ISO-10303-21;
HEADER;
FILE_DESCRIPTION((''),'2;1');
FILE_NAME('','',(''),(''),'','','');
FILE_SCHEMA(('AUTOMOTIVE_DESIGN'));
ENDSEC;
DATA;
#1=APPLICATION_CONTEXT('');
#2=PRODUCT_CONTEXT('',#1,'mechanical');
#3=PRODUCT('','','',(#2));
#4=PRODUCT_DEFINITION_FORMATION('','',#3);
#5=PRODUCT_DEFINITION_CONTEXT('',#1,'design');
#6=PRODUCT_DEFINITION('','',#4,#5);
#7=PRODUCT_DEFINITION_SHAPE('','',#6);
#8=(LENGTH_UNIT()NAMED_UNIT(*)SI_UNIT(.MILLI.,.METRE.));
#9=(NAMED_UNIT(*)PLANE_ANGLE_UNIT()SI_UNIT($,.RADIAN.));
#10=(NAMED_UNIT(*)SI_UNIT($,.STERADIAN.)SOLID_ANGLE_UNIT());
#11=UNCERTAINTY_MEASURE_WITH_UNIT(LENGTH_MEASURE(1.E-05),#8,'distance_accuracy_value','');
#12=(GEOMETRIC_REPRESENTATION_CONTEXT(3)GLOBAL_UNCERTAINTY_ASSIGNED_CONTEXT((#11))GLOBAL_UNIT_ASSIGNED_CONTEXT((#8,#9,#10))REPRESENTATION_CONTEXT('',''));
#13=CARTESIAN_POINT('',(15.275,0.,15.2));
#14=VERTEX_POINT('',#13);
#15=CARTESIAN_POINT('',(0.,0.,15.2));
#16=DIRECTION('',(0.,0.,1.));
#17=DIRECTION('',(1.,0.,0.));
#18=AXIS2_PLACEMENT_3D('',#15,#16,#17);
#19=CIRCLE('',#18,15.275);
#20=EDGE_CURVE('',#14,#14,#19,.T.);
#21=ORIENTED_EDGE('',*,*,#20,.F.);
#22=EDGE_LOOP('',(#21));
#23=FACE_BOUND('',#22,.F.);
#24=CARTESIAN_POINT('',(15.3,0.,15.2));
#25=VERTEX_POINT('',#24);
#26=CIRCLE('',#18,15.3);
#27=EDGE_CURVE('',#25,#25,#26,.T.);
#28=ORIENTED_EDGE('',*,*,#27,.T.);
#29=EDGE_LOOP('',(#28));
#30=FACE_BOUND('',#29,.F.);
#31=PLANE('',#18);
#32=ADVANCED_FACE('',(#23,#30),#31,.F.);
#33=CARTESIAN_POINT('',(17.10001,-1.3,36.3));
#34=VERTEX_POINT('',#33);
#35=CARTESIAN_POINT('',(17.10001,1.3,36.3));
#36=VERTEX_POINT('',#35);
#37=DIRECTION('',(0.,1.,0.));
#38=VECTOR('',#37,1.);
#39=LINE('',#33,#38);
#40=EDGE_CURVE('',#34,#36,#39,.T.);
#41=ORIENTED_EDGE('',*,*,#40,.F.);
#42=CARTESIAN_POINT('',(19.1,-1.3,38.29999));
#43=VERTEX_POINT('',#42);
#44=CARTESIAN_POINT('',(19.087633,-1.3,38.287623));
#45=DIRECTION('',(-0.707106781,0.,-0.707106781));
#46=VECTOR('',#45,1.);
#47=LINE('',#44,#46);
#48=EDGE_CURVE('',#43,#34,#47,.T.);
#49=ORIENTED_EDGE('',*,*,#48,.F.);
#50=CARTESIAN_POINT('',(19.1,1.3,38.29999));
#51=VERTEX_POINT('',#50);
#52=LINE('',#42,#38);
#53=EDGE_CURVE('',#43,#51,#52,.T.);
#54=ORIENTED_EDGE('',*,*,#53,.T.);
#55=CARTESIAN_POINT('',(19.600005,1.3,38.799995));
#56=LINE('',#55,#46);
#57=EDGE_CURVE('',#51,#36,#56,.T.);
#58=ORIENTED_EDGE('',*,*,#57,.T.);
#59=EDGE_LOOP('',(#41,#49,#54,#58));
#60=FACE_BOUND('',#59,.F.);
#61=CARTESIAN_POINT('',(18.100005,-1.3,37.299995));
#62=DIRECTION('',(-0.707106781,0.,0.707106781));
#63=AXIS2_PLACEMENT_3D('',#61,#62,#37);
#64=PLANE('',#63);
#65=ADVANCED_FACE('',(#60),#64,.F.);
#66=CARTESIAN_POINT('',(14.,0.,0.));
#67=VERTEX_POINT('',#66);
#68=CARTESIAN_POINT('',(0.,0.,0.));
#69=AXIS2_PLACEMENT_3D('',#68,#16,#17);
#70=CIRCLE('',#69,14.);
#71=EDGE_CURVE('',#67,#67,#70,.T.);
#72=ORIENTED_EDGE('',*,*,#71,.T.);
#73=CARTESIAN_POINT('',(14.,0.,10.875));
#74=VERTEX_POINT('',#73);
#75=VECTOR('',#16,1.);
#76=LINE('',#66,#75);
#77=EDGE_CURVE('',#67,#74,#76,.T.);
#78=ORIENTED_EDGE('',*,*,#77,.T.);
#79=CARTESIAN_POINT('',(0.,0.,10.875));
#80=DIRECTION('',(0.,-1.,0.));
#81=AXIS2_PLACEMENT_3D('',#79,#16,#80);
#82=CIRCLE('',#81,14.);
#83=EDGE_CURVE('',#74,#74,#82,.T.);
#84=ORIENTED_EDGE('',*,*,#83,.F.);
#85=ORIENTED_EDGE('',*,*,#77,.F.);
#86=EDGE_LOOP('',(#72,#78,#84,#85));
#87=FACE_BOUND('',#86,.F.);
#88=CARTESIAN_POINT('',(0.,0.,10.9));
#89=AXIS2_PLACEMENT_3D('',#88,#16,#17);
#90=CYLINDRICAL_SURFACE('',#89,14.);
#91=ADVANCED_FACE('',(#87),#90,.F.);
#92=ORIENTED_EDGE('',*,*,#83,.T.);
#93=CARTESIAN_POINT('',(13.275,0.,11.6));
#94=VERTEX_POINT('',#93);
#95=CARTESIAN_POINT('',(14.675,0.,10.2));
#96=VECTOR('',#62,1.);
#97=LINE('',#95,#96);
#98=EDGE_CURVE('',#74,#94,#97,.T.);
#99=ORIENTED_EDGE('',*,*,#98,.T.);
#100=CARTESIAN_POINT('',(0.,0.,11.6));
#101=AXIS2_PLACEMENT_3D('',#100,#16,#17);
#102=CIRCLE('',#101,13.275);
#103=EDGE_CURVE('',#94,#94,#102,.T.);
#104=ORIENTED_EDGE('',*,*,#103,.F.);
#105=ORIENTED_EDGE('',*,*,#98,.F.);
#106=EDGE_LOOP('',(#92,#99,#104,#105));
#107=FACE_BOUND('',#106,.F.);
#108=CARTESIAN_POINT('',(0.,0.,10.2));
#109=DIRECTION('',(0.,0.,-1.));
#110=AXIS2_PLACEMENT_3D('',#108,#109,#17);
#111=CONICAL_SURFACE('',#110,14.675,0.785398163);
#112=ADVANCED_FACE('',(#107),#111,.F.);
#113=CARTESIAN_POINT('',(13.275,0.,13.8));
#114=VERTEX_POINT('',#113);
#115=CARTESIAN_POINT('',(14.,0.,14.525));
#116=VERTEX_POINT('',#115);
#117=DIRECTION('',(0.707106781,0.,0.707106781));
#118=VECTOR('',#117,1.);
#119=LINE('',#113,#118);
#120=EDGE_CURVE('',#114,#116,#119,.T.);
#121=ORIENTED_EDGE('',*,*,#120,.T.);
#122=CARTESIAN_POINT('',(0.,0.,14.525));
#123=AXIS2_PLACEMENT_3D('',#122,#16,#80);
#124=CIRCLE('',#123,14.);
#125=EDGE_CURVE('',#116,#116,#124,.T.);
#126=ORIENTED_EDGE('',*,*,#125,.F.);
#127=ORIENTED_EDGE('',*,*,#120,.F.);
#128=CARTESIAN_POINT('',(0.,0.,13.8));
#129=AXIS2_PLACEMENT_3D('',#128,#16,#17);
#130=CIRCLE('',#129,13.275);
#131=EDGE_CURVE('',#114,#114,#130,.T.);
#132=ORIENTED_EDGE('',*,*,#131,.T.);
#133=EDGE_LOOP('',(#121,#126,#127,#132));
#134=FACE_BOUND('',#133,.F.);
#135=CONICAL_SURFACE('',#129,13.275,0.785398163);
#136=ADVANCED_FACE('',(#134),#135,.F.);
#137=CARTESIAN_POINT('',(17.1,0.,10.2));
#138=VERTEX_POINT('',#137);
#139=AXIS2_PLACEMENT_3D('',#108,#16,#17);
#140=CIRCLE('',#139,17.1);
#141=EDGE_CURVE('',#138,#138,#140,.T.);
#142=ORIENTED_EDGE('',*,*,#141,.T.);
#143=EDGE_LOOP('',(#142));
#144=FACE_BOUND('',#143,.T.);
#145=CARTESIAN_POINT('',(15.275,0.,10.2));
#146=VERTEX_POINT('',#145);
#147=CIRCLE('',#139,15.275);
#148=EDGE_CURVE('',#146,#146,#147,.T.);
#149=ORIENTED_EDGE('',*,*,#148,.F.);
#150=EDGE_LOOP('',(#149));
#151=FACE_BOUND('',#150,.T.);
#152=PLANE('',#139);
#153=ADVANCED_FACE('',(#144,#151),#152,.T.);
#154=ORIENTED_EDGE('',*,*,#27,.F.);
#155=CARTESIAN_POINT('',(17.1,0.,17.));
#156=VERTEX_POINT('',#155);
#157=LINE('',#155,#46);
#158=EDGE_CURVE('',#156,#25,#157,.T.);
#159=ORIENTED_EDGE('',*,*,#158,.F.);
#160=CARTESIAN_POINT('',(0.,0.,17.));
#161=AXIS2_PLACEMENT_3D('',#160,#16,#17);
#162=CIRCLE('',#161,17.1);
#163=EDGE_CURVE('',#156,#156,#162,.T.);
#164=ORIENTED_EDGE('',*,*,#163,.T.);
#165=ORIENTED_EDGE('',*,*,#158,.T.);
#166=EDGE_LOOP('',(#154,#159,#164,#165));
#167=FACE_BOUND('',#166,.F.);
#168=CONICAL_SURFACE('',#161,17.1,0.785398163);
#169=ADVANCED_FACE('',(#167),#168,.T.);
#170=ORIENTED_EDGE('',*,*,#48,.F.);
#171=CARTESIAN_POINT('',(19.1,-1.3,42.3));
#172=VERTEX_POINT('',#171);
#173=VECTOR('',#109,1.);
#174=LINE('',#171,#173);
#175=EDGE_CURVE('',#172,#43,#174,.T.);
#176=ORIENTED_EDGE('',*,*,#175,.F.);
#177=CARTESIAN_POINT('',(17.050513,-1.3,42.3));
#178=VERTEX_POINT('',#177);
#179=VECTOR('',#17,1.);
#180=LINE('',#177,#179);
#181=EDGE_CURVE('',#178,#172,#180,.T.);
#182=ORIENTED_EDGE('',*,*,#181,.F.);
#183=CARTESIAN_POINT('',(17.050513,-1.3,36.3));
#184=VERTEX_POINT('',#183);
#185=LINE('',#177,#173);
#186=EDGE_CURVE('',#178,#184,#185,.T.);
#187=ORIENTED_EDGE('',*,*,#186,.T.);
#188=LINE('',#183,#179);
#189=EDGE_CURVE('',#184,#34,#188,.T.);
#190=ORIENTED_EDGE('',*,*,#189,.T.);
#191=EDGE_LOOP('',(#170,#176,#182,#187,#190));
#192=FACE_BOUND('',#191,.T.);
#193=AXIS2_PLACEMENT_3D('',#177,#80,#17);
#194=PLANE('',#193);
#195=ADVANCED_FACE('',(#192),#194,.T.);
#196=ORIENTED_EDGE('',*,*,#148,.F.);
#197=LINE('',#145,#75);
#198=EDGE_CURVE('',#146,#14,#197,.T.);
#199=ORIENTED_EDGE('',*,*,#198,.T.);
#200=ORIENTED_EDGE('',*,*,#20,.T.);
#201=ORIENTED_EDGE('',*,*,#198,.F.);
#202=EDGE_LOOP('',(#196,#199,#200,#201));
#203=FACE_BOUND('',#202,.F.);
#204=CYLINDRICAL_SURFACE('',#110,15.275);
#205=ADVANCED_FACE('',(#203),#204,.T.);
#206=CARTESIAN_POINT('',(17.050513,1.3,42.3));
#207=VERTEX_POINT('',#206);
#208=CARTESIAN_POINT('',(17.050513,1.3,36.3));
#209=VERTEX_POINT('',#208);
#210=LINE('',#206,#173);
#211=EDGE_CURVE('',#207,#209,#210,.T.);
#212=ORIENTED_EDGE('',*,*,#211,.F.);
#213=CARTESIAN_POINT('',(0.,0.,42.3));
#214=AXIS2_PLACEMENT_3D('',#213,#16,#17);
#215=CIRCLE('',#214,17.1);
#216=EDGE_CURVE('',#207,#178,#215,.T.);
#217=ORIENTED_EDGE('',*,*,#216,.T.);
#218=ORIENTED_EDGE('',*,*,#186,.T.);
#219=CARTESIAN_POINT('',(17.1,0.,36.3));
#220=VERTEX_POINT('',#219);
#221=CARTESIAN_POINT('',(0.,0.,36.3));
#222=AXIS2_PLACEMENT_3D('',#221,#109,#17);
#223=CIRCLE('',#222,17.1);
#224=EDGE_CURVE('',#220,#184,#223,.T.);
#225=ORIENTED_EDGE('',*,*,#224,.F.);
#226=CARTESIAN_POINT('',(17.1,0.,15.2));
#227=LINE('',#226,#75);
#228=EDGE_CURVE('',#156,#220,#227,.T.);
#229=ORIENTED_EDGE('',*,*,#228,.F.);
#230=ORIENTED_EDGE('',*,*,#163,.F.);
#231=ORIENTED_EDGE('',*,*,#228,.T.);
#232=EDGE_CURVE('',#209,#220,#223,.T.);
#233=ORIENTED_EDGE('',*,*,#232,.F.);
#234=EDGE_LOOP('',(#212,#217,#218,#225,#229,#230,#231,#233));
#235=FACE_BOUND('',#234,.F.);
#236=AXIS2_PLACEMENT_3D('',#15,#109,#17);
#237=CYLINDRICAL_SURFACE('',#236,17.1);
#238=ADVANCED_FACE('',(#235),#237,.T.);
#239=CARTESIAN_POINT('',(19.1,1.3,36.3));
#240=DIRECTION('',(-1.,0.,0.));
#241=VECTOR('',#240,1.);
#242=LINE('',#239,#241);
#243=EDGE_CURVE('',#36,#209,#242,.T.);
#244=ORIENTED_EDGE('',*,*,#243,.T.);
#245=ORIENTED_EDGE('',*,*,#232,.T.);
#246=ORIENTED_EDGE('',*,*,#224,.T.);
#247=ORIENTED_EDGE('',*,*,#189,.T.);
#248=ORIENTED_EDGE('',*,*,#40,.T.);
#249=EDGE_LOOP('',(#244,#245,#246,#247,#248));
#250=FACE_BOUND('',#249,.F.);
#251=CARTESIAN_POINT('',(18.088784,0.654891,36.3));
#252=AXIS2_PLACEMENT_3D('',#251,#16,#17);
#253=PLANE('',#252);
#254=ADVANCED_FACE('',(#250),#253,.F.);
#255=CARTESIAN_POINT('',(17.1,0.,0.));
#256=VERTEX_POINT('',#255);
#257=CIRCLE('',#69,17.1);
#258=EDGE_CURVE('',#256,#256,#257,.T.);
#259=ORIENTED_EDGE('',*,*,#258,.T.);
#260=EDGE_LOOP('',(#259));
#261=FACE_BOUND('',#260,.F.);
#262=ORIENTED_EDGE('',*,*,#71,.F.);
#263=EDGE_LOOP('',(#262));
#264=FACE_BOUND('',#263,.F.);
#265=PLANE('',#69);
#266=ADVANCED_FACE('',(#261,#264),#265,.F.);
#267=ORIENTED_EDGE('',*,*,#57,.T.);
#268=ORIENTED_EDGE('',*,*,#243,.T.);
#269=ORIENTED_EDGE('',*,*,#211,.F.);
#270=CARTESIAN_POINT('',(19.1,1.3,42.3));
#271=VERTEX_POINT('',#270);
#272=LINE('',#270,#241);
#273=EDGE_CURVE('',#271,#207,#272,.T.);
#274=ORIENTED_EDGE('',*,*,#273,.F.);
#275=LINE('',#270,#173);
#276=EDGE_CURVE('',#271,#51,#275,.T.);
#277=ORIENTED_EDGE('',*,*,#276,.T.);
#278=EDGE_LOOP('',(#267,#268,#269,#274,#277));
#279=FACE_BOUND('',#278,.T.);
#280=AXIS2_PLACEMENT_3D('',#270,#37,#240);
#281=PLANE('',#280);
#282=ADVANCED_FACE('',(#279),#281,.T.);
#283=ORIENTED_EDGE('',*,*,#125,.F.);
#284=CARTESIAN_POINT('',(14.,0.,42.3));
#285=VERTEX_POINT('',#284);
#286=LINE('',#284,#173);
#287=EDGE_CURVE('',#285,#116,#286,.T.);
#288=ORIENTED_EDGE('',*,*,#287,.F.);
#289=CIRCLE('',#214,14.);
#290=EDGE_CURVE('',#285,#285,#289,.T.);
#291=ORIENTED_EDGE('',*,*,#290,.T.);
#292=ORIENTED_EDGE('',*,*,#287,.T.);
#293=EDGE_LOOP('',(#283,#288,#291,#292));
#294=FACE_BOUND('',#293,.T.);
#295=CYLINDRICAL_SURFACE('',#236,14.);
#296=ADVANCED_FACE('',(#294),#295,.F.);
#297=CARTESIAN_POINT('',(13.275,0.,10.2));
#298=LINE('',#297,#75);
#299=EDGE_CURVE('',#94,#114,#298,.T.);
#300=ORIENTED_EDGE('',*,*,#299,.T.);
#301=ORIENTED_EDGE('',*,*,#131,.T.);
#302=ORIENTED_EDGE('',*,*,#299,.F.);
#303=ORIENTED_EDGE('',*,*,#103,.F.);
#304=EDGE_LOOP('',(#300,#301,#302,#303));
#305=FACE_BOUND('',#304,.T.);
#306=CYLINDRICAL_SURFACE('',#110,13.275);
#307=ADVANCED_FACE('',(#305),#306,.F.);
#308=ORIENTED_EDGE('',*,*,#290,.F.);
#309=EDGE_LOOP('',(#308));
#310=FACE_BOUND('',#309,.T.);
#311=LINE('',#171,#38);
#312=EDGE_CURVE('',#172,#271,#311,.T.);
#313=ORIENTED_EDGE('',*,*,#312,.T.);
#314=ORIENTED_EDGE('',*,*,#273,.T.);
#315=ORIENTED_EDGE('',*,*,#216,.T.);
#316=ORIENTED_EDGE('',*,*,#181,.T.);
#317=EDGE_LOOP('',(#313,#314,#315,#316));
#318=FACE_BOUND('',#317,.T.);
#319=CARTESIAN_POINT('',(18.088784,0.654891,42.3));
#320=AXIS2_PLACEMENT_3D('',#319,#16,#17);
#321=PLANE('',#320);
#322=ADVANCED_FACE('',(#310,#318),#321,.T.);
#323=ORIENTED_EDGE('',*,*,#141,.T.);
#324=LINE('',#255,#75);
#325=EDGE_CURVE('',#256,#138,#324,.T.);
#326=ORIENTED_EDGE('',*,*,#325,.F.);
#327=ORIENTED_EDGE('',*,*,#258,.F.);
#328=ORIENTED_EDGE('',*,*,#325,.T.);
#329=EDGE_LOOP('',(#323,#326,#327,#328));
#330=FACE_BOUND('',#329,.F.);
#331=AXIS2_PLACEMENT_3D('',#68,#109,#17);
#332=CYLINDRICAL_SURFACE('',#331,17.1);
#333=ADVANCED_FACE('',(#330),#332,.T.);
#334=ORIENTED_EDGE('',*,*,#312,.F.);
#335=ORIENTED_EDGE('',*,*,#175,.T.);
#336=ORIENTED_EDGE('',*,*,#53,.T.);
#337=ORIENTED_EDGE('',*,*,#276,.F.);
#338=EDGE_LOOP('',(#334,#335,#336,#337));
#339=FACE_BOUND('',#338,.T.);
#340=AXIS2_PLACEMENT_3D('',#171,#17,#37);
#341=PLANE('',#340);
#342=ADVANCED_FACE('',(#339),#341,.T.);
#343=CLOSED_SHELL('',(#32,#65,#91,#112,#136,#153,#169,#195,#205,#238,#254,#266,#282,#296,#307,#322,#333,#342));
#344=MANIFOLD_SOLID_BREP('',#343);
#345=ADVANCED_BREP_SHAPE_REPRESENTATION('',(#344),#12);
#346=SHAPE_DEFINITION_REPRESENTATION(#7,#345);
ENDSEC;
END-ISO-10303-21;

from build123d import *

# Parameters (mm, degrees)
F0_R         = 17.1
F0_R_2       = 14
F1_DEPTH     = 10.2
F2_R         = 15.275
F2_R_2       = 14
F2_R_3       = 13.275
F3_DEPTH     = 5
F4_R         = 17.1
F4_R_2       = 15.275
F4_R_3       = 14
F5_DEPTH     = 27.1
F6_S5_R      = 14
F6_T6_DEPTH  = 22
F6_S11_R     = 14
F6_T12_DEPTH = 22
F7_SIZE      = 1.8
F9_DEPTH     = 6
F10_SIZE     = 1.99999


# Not quite as in the source:
# - a fillet or chamfer that OpenCascade refuses, or shapes differently, is made with other operations: its cross-section is extruded or revolved along the edge and cut away or added
# - a fillet or chamfer is up to 0.001 mm smaller than in the source, because OpenCascade refuses the exact size


with BuildPart() as f1:
    # F0 (on Top) → F1 (new body)
    with BuildSketch(Plane.XY):
        Circle(F0_R)
        Circle(F0_R_2, mode=Mode.SUBTRACT)
    extrude(amount=F1_DEPTH)

    # F2 (on face) → F3 (join)
    with BuildSketch(Plane.XY.offset(10.2)):
        Circle(F2_R)
        Circle(F2_R_2, mode=Mode.SUBTRACT)
        Circle(F2_R_2)
        Circle(F2_R_3, mode=Mode.SUBTRACT)
    extrude(amount=F3_DEPTH)

    # F4 (on face) → F5 (join)
    with BuildSketch(Plane.XY.offset(15.2)):
        Circle(F4_R)
        Circle(F4_R_2, mode=Mode.SUBTRACT)
        Circle(F4_R_2)
        Circle(F4_R_3, mode=Mode.SUBTRACT)
    extrude(amount=F5_DEPTH)

    # F6: chamfer of 1.4 on 2 edges, made by hand


with BuildPart() as f6_tool2:
    # F6_s3 → F6_t4 (revolve)
    with BuildSketch(Plane.XZ):
        Polygon((14.675, 10.2), (13.275, 11.6), (13.275, 10.2), align=None)
    revolve(axis=Axis((0, 0, 10.2), (0, 0, 1)))

    # F6_s5 → F6_t6 (intersect, symmetric)
    with BuildSketch(Plane.XY.offset(10.9)):
        Circle(F6_S5_R)
    extrude(amount=F6_T6_DEPTH, both=True, mode=Mode.INTERSECT)


with BuildPart() as f1_1:
    add(f1.part)

    # F6_t1: cut F6_tool2
    add(f6_tool2.part, mode=Mode.SUBTRACT)


with BuildPart() as f6_tool8:
    # F6_s9 → F6_t10 (revolve)
    with BuildSketch(Plane.XZ):
        Polygon((13.275, 13.8), (14.675, 15.2), (13.275, 15.2), align=None)
    revolve(axis=Axis((0, 0, 15.2), (0, 0, 1)))

    # F6_s11 → F6_t12 (intersect, symmetric)
    with BuildSketch(Plane.XY.offset(14.5)):
        Circle(F6_S11_R)
    extrude(amount=F6_T12_DEPTH, both=True, mode=Mode.INTERSECT)


with BuildPart() as f1_2:
    add(f1_1.part)

    # F6_t7: cut F6_tool8
    add(f6_tool8.part, mode=Mode.SUBTRACT)

    # F7
    f7_edges = [f1_2.edges().sort_by_distance(p)[0] for p in [
        (-17.1, 0, 15.2),
    ]]
    chamfer(f7_edges, length=F7_SIZE)

    # F8 (on face) → F9 (join)
    with BuildSketch(Plane.XY.offset(42.3)):
        with BuildLine():
            ThreePointArc((17.0505131888, 1.3), (17.0876238185, 0.6504707804), (17.1, 0))
            Line((17.1, 0), (19.1, 0))
            Line((19.1, 0), (19.1, 1.3))
            Line((19.1, 1.3), (17.0505131888, 1.3))
        make_face()
        with BuildLine():
            Line((19.1, 0), (17.1, 0))
            ThreePointArc((17.1, 0), (17.0876238185, -0.6504707804), (17.0505131888, -1.3))
            Line((17.0505131888, -1.3), (19.1, -1.3))
            Line((19.1, -1.3), (19.1, 0))
        make_face()
        with BuildLine():
            Line((17.1, 0), (17.0505131888, 0))
            Line((17.0505131888, 0), (17.0505131888, -1.3))
            ThreePointArc((17.0505131888, -1.3), (17.0876238185, -0.6504707804), (17.1, 0))
        make_face()
        with BuildLine():
            Line((17.0505131888, 1.3), (17.0505131888, 0))
            Line((17.0505131888, 0), (17.1, 0))
            ThreePointArc((17.1, 0), (17.0876238185, 0.6504707804), (17.0505131888, 1.3))
        make_face()
    extrude(amount=-F9_DEPTH)

    # F10 (size 2 in the source; OpenCascade refuses exactly that, so slightly less here)
    f10_edges = [f1_2.edges().sort_by_distance(p)[0] for p in [
        (19.1, 0, 36.3),
    ]]
    chamfer(f10_edges, length=F10_SIZE)


solid = f1_2.part
